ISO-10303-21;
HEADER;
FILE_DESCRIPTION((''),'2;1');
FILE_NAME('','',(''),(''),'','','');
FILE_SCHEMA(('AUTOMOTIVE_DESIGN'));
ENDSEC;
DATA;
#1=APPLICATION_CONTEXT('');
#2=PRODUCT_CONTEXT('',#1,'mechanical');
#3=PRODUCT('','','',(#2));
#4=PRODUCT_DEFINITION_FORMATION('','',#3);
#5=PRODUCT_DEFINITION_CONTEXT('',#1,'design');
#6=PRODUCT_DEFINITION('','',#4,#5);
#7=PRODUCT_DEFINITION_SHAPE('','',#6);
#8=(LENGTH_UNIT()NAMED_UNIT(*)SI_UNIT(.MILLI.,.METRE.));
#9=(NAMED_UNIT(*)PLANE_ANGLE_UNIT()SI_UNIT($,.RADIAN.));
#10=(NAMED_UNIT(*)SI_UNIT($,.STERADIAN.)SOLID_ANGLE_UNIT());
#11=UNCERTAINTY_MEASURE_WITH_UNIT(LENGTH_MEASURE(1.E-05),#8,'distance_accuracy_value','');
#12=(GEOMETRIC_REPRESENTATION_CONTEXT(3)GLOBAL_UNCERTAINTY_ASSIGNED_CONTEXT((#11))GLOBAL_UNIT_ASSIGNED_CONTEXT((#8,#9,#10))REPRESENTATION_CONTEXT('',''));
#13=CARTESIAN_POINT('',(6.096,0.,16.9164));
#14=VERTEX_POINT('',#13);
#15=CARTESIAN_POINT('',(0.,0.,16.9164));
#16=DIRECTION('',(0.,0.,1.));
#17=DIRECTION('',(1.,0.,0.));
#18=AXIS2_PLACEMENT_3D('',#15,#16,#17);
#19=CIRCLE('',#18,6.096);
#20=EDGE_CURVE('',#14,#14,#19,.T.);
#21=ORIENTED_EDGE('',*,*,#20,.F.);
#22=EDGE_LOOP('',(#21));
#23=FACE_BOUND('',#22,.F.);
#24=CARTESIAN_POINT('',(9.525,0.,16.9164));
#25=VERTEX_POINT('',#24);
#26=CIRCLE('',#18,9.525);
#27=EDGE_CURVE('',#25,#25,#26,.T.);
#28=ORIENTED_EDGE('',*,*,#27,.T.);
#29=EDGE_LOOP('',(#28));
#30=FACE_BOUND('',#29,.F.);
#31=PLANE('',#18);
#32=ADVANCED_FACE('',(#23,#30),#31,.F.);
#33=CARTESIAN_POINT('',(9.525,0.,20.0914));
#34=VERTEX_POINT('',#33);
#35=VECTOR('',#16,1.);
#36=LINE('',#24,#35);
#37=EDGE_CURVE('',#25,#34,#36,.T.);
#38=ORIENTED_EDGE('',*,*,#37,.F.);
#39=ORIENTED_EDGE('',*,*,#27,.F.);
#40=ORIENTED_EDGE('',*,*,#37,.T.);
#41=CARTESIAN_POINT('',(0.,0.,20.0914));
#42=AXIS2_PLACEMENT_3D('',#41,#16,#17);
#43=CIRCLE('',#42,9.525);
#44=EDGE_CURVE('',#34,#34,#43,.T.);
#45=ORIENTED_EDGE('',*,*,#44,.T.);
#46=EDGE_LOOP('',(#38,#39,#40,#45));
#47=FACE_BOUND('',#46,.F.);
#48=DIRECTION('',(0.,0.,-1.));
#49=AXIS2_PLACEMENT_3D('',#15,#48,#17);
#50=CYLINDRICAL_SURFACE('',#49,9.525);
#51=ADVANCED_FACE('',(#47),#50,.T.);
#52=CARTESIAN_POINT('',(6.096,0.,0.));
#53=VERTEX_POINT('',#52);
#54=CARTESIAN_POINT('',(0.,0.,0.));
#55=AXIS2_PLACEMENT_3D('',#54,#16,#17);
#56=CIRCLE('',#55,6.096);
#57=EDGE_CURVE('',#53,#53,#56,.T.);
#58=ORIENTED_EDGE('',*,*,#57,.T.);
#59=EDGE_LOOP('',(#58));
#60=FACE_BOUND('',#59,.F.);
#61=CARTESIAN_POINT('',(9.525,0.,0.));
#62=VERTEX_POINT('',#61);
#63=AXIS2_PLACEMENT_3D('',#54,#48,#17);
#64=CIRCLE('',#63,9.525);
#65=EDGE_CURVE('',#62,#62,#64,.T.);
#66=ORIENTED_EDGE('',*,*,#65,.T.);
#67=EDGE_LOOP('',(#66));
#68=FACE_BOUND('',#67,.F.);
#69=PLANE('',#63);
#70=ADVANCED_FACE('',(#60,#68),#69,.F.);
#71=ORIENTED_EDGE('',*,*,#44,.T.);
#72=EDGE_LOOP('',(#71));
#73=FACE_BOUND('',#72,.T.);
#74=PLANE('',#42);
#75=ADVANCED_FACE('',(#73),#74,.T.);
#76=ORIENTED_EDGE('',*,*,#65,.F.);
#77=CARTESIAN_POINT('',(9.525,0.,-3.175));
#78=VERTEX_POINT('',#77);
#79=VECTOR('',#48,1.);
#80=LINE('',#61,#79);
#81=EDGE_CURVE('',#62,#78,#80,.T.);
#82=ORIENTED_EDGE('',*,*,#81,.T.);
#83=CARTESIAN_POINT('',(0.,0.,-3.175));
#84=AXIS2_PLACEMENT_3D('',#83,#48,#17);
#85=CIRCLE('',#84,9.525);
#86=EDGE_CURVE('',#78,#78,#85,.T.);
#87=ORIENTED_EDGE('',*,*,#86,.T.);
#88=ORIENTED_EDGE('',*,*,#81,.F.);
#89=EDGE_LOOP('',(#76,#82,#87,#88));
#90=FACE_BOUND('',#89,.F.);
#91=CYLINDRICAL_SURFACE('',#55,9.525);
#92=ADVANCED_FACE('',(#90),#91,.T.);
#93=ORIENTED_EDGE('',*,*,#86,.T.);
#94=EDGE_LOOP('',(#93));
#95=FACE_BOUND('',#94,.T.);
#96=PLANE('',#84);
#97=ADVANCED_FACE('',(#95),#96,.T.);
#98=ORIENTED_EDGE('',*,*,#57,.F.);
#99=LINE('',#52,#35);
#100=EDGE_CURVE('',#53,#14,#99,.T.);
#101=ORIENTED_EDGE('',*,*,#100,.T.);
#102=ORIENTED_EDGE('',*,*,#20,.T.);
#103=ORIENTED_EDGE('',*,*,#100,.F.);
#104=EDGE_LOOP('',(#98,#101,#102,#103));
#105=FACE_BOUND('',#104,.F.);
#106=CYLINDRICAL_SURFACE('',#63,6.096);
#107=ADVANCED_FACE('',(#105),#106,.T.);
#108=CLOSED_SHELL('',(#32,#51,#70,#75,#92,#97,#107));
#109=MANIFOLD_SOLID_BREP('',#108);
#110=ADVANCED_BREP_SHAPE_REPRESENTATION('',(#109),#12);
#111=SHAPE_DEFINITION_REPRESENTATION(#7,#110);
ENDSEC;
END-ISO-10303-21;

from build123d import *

# Parameters (mm, degrees)
F0_R     = 6.096
F1_DEPTH = 16.9164
F2_R     = 9.525
F2_R_2   = 6.096
F3_DEPTH = 3.175
F4_R     = 9.525
F5_DEPTH = 3.175


# Not quite as in the source:
# - a feature names something its author has since deleted; it is built from what else it names


with BuildPart() as f1:
    # F0 (on Top) → F1 (new body)
    with BuildSketch(Plane.XY):
        Circle(F0_R)
    extrude(amount=F1_DEPTH)

    # F2 (on face) → F3 (join)
    with BuildSketch(Plane.XY.offset(16.9164)):
        Circle(F2_R)
        Circle(F2_R_2, mode=Mode.SUBTRACT)
        Circle(F2_R_2)
    extrude(amount=F3_DEPTH)

    # F4 (on face) → F5 (join)
    with BuildSketch(Plane(origin=(0, 0, 0), x_dir=(1, 0, 0), z_dir=(0, 0, -1))):
        Circle(F4_R)
    extrude(amount=F5_DEPTH)


solid = f1.part
